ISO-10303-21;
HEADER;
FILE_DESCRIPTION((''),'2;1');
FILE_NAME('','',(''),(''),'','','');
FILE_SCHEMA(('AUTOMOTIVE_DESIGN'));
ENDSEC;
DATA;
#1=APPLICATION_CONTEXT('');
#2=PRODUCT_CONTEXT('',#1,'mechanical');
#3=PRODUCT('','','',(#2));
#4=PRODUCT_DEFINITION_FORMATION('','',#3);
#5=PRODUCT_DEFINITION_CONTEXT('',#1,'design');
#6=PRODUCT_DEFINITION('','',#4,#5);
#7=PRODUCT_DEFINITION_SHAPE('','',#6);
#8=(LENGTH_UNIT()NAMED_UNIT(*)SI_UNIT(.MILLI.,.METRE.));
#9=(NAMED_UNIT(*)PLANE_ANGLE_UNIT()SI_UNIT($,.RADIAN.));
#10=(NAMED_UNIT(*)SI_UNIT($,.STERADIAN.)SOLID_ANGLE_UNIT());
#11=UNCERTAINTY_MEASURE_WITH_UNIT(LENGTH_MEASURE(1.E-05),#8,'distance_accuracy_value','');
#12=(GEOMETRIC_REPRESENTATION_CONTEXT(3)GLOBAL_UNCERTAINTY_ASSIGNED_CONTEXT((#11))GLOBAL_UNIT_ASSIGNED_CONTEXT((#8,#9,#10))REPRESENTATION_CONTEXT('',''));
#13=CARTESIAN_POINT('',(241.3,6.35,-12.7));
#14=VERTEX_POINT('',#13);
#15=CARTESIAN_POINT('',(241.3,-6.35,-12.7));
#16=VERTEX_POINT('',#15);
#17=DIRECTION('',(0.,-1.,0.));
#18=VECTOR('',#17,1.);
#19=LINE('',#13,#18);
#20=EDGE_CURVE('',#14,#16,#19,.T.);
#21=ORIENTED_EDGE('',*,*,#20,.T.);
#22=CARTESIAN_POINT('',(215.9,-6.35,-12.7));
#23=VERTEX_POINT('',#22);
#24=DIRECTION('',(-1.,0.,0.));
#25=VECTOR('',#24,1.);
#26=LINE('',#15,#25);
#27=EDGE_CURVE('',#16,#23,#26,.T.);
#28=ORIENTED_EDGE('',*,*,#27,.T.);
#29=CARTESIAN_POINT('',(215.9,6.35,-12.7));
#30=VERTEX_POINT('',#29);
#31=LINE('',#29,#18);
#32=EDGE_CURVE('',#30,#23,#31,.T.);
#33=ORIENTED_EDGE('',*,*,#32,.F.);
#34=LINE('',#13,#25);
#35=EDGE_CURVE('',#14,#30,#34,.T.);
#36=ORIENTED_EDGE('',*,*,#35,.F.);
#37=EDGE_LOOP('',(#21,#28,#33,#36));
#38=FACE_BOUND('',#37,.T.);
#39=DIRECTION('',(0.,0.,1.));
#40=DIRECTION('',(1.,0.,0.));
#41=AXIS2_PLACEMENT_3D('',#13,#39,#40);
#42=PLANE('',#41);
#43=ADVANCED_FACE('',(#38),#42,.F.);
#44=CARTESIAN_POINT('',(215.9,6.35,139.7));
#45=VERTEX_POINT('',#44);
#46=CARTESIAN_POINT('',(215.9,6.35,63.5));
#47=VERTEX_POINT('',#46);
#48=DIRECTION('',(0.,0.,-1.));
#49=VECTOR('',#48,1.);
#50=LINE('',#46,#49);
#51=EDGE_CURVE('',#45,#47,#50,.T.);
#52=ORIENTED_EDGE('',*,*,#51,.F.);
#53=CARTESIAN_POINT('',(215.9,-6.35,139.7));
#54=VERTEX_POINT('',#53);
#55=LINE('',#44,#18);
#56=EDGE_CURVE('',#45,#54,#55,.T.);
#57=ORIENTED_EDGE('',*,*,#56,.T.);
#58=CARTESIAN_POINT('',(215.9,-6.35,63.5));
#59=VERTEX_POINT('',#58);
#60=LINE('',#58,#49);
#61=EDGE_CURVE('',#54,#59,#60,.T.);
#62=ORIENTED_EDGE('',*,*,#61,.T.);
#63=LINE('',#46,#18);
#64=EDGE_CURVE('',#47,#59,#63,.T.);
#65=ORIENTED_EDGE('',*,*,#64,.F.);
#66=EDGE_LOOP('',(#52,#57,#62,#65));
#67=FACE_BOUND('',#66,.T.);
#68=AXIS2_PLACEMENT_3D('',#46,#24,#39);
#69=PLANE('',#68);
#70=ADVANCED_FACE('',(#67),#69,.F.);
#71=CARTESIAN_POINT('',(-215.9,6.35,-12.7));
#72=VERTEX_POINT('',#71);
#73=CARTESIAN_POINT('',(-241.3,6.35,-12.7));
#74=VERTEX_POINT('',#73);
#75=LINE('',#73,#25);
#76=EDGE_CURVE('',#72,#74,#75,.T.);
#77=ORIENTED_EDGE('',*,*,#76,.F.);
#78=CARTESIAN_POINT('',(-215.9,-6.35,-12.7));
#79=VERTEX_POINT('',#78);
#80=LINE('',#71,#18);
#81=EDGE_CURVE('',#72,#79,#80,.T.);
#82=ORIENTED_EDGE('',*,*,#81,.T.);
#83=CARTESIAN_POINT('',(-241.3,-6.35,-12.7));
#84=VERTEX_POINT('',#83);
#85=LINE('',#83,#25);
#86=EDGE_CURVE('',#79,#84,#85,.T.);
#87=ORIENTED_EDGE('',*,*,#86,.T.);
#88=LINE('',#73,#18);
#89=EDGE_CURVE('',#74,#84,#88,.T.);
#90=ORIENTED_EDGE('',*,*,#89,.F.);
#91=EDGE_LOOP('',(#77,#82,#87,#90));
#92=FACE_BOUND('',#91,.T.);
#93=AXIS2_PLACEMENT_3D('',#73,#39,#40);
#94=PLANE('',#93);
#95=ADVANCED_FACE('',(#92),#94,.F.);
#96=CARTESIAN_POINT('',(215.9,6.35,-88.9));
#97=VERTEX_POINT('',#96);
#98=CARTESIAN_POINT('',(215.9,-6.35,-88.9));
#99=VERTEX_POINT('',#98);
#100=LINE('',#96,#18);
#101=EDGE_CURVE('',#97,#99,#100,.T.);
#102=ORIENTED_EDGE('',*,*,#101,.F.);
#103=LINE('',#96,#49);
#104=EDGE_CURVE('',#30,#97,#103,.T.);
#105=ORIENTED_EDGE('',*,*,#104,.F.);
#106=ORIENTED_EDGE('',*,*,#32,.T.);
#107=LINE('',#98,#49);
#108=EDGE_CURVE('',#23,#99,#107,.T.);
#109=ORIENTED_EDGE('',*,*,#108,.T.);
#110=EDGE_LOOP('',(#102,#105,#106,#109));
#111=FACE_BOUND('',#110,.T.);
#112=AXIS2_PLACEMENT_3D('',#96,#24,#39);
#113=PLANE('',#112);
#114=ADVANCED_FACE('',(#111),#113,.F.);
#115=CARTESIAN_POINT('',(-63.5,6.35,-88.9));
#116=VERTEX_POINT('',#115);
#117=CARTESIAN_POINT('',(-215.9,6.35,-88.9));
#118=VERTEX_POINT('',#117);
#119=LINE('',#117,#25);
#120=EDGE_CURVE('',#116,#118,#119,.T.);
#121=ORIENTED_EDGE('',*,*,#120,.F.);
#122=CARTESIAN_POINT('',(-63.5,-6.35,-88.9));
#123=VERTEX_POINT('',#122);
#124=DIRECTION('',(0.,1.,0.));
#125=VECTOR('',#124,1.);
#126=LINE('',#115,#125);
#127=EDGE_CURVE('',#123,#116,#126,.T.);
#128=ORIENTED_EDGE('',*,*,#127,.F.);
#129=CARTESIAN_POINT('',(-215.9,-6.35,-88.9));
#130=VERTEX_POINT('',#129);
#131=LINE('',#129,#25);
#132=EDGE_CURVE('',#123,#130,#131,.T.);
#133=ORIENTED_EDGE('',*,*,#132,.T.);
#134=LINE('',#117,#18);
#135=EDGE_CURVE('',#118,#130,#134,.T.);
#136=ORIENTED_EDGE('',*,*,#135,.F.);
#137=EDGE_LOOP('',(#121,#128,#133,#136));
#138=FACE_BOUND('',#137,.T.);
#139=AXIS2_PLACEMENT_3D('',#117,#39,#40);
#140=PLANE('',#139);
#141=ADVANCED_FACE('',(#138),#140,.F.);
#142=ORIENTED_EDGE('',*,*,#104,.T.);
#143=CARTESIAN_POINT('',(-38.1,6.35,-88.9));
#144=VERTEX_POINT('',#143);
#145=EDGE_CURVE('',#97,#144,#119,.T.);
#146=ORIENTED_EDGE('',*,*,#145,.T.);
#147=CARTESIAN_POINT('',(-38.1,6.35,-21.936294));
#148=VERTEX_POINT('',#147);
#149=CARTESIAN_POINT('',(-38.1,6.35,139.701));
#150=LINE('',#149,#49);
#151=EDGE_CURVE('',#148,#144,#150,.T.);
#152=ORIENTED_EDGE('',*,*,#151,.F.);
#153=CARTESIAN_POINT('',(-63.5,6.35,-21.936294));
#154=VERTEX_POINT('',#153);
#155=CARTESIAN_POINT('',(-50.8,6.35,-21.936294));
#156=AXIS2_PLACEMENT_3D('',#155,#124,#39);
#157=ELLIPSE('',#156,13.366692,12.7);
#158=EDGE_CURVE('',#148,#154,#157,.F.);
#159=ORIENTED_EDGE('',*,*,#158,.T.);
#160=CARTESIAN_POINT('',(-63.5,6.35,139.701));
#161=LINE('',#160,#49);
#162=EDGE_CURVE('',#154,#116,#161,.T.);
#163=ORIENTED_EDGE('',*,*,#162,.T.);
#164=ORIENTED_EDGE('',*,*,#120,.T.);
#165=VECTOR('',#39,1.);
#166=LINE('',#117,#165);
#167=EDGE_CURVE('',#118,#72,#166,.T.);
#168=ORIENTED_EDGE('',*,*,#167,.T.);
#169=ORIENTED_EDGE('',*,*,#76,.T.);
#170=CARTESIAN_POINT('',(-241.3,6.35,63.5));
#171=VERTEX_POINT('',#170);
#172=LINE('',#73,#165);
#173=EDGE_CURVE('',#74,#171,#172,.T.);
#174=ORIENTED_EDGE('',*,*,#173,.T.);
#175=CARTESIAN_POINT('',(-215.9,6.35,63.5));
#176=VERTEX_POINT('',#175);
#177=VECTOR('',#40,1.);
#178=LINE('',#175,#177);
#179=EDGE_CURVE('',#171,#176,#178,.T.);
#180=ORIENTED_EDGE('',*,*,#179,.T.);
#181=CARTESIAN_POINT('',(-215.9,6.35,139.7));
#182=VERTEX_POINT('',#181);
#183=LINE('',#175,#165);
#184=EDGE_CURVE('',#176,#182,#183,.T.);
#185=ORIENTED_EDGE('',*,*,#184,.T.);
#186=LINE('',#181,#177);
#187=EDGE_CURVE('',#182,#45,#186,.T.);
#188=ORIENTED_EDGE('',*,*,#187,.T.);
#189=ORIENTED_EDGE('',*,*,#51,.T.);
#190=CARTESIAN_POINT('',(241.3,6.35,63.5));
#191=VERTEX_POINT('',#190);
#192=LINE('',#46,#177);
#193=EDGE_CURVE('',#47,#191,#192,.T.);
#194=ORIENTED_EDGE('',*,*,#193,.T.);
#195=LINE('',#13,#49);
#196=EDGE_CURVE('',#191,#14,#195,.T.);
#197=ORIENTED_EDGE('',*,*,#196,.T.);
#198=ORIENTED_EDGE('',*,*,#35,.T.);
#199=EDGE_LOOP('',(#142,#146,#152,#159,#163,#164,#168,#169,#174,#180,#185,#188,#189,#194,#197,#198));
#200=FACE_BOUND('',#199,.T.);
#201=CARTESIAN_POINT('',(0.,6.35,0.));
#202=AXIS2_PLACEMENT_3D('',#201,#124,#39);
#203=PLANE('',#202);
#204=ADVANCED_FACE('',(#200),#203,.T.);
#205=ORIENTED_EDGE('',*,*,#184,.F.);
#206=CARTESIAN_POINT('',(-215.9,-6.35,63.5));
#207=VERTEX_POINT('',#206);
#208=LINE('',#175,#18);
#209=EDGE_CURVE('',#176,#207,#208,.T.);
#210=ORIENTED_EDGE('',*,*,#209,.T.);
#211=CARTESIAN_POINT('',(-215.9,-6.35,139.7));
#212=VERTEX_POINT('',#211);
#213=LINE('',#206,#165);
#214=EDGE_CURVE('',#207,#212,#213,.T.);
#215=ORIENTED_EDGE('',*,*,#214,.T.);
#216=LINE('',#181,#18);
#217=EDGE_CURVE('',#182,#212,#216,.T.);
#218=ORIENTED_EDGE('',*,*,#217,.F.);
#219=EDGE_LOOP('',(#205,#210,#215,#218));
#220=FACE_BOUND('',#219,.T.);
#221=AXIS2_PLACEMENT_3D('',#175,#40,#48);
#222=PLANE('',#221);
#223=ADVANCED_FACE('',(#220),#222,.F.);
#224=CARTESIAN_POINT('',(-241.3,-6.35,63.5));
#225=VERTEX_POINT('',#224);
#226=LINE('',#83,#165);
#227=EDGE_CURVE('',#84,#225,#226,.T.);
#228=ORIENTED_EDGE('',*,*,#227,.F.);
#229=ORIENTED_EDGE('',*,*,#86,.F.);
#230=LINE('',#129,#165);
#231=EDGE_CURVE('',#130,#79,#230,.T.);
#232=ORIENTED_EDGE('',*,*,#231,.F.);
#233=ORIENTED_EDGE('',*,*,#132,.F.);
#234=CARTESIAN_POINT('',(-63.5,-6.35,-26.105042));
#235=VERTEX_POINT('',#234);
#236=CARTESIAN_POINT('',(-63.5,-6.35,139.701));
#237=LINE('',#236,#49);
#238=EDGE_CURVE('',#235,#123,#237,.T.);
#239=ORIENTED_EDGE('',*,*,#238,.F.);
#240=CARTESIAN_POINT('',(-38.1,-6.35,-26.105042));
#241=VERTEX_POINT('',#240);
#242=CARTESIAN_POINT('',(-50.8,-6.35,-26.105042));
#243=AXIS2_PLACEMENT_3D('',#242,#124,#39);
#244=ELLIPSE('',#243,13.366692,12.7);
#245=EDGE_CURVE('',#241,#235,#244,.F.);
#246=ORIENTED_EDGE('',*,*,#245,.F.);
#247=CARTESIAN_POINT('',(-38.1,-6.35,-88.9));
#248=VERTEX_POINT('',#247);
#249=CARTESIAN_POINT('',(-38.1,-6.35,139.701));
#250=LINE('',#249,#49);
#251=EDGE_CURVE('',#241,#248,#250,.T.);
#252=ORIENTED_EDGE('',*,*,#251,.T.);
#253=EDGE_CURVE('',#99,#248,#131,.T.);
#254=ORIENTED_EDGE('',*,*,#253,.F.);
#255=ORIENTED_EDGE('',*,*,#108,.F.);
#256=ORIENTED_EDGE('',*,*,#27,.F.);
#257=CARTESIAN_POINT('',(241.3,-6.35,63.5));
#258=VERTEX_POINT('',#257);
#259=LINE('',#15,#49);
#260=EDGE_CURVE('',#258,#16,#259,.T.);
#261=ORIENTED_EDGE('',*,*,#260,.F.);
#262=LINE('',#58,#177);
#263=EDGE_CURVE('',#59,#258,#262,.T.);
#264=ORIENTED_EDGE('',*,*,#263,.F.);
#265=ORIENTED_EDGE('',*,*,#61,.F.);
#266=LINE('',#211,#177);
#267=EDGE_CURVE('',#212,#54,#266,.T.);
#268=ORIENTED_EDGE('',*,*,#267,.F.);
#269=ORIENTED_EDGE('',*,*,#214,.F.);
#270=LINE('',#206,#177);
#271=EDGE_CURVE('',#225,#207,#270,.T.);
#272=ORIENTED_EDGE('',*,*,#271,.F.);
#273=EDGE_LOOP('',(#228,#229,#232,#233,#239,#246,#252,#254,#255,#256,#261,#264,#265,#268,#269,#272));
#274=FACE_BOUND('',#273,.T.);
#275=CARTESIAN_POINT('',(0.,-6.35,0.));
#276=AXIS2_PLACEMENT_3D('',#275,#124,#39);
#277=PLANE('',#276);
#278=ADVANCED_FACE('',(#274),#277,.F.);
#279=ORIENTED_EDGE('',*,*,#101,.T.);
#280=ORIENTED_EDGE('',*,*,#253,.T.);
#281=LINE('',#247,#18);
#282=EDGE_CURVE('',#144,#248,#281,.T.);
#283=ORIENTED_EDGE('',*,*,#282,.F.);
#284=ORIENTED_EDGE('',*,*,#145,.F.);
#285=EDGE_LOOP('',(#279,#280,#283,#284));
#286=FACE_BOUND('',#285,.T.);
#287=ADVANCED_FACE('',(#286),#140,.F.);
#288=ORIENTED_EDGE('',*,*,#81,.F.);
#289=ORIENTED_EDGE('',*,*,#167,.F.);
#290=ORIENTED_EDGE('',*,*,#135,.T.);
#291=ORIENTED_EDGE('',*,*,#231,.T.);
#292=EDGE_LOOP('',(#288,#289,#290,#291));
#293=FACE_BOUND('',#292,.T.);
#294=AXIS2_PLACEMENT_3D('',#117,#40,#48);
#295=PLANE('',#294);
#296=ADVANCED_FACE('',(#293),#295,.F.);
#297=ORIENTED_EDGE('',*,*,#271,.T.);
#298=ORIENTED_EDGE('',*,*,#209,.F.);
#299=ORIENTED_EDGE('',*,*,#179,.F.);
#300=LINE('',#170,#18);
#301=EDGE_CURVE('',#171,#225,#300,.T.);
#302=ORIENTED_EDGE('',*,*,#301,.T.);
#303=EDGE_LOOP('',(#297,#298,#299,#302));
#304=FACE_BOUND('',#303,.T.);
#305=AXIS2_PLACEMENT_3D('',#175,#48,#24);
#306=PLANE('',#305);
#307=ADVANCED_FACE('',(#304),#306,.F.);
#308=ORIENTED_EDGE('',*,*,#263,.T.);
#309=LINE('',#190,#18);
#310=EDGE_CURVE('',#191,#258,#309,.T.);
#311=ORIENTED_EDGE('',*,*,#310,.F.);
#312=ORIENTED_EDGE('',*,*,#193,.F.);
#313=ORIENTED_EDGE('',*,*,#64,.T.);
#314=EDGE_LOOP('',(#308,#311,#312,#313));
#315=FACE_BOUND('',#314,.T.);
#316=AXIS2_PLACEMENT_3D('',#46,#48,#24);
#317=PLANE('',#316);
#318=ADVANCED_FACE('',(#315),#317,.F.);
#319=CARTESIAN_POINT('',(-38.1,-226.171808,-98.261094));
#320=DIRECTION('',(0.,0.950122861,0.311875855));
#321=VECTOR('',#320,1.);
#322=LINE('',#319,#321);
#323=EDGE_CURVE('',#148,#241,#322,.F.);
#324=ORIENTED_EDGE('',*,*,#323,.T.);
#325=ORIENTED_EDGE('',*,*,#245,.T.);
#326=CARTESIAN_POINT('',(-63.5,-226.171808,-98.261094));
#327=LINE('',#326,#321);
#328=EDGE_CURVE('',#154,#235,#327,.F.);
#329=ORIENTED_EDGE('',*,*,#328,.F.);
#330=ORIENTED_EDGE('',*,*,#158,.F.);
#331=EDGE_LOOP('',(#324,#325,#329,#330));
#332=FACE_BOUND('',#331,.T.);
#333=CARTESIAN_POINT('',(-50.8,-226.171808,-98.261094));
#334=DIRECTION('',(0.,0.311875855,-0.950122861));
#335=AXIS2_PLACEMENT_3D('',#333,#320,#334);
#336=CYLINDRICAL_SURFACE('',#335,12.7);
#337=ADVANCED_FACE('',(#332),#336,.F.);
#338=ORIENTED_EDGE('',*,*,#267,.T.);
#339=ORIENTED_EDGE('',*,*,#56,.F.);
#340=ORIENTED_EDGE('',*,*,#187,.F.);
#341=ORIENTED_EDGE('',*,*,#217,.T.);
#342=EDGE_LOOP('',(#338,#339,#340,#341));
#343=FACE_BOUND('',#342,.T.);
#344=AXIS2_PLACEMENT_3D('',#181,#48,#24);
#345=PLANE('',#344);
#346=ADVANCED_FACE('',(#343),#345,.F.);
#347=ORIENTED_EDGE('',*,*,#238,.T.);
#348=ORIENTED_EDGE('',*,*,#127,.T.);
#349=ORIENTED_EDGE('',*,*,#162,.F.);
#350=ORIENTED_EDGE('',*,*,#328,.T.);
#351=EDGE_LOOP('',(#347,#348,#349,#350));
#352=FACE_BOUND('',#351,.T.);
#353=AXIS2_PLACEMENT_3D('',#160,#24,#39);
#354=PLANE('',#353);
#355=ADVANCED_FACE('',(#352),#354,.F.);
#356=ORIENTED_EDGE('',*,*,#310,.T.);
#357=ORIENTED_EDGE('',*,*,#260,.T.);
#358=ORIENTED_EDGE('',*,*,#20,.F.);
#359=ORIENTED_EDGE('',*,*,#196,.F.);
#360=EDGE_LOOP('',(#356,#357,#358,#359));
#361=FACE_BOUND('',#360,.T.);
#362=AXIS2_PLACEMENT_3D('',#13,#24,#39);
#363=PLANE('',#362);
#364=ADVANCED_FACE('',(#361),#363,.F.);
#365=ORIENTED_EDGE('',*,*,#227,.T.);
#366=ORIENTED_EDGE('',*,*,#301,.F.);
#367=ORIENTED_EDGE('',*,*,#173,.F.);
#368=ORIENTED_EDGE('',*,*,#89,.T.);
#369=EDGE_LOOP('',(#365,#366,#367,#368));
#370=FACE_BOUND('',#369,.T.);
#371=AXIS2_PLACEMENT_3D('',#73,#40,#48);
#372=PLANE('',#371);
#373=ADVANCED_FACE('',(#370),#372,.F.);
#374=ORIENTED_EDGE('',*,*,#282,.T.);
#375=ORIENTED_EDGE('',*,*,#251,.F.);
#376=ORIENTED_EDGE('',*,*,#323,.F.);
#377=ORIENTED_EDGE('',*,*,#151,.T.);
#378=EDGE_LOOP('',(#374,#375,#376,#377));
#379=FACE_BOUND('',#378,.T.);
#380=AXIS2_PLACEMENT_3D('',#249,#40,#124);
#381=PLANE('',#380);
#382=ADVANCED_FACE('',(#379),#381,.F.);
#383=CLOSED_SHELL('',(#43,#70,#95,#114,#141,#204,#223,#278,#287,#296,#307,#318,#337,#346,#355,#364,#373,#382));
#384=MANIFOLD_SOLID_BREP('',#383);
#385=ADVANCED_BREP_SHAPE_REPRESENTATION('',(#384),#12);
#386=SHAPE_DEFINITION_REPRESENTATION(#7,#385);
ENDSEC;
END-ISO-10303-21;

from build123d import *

# Parameters (mm, degrees)
BOSS_EXTRUDE1_DEPTH     = 6.35
CAVITY1_START           = -18.343561252
CAVITY1_OUTLINE_R       = 12.7
CAVITY1_DEPTH           = 21.704189785
CUT_EXTRUDE1_REACH      = 334.451
CUT_EXTRUDE1_END_RADIUS = 12.7
SKETCH3_W               = 25.4
SKETCH3_H               = 12.7


# Read off the part's stored shape, not the designer's step: Cavity1
with BuildPart() as part:
    # Sketch1 → Boss-Extrude1 (new, symmetric)
    with BuildSketch(Plane(origin=(0, 0, 0), x_dir=(1, 0, 0), z_dir=(0, 1, 0))):
        Polygon((-215.9, -139.7), (215.9, -139.7), (215.9, -63.5), (241.3, -63.5), (241.3, 12.7), (215.9, 12.7), (215.9, 88.9), (-215.9, 88.9), (-215.9, 12.7), (-241.3, 12.7), (-241.3, -63.5), (-215.9, -63.5), align=None)
    extrude(amount=BOSS_EXTRUDE1_DEPTH, both=True)

    # Cavity1 outline → Cavity1 (cut)
    with BuildSketch(Plane(origin=(0, 0, 0), x_dir=(1, 0, 0), z_dir=(0, 0.9501228611580823, 0.3118758546357501)).offset(CAVITY1_START)):
        with Locations((-50.8, 22.822585801)):
            Circle(CAVITY1_OUTLINE_R)
    extrude(amount=CAVITY1_DEPTH, mode=Mode.SUBTRACT)

    # Cut-Extrude1: up to this cylinder (the profile starts outside it)
    cut_extrude1_end = Plane(origin=(-50.8, -19.225068271, -30.3312567), z_dir=(0, 0.9501228611580824, 0.3118758546357496)) * Cylinder(CUT_EXTRUDE1_END_RADIUS, 695.302, mode=Mode.PRIVATE)
    # Sketch3 → Cut-Extrude1 (cut, up to the surface)
    with BuildSketch(Plane(origin=(0, 0, -88.9), x_dir=(-1, 0, 0), z_dir=(0, 0, -1)), mode=Mode.PRIVATE) as cut_extrude1_sk1:
        with Locations((50.8, 0)):
            Rectangle(SKETCH3_W, SKETCH3_H)
    cut_extrude1_tool1 = extrude(cut_extrude1_sk1.sketch, amount=-CUT_EXTRUDE1_REACH, mode=Mode.PRIVATE) - cut_extrude1_end
    add(cut_extrude1_tool1.solids().sort_by_distance((-50.8, 0, -88.9))[0], mode=Mode.SUBTRACT)


solid = part.part
